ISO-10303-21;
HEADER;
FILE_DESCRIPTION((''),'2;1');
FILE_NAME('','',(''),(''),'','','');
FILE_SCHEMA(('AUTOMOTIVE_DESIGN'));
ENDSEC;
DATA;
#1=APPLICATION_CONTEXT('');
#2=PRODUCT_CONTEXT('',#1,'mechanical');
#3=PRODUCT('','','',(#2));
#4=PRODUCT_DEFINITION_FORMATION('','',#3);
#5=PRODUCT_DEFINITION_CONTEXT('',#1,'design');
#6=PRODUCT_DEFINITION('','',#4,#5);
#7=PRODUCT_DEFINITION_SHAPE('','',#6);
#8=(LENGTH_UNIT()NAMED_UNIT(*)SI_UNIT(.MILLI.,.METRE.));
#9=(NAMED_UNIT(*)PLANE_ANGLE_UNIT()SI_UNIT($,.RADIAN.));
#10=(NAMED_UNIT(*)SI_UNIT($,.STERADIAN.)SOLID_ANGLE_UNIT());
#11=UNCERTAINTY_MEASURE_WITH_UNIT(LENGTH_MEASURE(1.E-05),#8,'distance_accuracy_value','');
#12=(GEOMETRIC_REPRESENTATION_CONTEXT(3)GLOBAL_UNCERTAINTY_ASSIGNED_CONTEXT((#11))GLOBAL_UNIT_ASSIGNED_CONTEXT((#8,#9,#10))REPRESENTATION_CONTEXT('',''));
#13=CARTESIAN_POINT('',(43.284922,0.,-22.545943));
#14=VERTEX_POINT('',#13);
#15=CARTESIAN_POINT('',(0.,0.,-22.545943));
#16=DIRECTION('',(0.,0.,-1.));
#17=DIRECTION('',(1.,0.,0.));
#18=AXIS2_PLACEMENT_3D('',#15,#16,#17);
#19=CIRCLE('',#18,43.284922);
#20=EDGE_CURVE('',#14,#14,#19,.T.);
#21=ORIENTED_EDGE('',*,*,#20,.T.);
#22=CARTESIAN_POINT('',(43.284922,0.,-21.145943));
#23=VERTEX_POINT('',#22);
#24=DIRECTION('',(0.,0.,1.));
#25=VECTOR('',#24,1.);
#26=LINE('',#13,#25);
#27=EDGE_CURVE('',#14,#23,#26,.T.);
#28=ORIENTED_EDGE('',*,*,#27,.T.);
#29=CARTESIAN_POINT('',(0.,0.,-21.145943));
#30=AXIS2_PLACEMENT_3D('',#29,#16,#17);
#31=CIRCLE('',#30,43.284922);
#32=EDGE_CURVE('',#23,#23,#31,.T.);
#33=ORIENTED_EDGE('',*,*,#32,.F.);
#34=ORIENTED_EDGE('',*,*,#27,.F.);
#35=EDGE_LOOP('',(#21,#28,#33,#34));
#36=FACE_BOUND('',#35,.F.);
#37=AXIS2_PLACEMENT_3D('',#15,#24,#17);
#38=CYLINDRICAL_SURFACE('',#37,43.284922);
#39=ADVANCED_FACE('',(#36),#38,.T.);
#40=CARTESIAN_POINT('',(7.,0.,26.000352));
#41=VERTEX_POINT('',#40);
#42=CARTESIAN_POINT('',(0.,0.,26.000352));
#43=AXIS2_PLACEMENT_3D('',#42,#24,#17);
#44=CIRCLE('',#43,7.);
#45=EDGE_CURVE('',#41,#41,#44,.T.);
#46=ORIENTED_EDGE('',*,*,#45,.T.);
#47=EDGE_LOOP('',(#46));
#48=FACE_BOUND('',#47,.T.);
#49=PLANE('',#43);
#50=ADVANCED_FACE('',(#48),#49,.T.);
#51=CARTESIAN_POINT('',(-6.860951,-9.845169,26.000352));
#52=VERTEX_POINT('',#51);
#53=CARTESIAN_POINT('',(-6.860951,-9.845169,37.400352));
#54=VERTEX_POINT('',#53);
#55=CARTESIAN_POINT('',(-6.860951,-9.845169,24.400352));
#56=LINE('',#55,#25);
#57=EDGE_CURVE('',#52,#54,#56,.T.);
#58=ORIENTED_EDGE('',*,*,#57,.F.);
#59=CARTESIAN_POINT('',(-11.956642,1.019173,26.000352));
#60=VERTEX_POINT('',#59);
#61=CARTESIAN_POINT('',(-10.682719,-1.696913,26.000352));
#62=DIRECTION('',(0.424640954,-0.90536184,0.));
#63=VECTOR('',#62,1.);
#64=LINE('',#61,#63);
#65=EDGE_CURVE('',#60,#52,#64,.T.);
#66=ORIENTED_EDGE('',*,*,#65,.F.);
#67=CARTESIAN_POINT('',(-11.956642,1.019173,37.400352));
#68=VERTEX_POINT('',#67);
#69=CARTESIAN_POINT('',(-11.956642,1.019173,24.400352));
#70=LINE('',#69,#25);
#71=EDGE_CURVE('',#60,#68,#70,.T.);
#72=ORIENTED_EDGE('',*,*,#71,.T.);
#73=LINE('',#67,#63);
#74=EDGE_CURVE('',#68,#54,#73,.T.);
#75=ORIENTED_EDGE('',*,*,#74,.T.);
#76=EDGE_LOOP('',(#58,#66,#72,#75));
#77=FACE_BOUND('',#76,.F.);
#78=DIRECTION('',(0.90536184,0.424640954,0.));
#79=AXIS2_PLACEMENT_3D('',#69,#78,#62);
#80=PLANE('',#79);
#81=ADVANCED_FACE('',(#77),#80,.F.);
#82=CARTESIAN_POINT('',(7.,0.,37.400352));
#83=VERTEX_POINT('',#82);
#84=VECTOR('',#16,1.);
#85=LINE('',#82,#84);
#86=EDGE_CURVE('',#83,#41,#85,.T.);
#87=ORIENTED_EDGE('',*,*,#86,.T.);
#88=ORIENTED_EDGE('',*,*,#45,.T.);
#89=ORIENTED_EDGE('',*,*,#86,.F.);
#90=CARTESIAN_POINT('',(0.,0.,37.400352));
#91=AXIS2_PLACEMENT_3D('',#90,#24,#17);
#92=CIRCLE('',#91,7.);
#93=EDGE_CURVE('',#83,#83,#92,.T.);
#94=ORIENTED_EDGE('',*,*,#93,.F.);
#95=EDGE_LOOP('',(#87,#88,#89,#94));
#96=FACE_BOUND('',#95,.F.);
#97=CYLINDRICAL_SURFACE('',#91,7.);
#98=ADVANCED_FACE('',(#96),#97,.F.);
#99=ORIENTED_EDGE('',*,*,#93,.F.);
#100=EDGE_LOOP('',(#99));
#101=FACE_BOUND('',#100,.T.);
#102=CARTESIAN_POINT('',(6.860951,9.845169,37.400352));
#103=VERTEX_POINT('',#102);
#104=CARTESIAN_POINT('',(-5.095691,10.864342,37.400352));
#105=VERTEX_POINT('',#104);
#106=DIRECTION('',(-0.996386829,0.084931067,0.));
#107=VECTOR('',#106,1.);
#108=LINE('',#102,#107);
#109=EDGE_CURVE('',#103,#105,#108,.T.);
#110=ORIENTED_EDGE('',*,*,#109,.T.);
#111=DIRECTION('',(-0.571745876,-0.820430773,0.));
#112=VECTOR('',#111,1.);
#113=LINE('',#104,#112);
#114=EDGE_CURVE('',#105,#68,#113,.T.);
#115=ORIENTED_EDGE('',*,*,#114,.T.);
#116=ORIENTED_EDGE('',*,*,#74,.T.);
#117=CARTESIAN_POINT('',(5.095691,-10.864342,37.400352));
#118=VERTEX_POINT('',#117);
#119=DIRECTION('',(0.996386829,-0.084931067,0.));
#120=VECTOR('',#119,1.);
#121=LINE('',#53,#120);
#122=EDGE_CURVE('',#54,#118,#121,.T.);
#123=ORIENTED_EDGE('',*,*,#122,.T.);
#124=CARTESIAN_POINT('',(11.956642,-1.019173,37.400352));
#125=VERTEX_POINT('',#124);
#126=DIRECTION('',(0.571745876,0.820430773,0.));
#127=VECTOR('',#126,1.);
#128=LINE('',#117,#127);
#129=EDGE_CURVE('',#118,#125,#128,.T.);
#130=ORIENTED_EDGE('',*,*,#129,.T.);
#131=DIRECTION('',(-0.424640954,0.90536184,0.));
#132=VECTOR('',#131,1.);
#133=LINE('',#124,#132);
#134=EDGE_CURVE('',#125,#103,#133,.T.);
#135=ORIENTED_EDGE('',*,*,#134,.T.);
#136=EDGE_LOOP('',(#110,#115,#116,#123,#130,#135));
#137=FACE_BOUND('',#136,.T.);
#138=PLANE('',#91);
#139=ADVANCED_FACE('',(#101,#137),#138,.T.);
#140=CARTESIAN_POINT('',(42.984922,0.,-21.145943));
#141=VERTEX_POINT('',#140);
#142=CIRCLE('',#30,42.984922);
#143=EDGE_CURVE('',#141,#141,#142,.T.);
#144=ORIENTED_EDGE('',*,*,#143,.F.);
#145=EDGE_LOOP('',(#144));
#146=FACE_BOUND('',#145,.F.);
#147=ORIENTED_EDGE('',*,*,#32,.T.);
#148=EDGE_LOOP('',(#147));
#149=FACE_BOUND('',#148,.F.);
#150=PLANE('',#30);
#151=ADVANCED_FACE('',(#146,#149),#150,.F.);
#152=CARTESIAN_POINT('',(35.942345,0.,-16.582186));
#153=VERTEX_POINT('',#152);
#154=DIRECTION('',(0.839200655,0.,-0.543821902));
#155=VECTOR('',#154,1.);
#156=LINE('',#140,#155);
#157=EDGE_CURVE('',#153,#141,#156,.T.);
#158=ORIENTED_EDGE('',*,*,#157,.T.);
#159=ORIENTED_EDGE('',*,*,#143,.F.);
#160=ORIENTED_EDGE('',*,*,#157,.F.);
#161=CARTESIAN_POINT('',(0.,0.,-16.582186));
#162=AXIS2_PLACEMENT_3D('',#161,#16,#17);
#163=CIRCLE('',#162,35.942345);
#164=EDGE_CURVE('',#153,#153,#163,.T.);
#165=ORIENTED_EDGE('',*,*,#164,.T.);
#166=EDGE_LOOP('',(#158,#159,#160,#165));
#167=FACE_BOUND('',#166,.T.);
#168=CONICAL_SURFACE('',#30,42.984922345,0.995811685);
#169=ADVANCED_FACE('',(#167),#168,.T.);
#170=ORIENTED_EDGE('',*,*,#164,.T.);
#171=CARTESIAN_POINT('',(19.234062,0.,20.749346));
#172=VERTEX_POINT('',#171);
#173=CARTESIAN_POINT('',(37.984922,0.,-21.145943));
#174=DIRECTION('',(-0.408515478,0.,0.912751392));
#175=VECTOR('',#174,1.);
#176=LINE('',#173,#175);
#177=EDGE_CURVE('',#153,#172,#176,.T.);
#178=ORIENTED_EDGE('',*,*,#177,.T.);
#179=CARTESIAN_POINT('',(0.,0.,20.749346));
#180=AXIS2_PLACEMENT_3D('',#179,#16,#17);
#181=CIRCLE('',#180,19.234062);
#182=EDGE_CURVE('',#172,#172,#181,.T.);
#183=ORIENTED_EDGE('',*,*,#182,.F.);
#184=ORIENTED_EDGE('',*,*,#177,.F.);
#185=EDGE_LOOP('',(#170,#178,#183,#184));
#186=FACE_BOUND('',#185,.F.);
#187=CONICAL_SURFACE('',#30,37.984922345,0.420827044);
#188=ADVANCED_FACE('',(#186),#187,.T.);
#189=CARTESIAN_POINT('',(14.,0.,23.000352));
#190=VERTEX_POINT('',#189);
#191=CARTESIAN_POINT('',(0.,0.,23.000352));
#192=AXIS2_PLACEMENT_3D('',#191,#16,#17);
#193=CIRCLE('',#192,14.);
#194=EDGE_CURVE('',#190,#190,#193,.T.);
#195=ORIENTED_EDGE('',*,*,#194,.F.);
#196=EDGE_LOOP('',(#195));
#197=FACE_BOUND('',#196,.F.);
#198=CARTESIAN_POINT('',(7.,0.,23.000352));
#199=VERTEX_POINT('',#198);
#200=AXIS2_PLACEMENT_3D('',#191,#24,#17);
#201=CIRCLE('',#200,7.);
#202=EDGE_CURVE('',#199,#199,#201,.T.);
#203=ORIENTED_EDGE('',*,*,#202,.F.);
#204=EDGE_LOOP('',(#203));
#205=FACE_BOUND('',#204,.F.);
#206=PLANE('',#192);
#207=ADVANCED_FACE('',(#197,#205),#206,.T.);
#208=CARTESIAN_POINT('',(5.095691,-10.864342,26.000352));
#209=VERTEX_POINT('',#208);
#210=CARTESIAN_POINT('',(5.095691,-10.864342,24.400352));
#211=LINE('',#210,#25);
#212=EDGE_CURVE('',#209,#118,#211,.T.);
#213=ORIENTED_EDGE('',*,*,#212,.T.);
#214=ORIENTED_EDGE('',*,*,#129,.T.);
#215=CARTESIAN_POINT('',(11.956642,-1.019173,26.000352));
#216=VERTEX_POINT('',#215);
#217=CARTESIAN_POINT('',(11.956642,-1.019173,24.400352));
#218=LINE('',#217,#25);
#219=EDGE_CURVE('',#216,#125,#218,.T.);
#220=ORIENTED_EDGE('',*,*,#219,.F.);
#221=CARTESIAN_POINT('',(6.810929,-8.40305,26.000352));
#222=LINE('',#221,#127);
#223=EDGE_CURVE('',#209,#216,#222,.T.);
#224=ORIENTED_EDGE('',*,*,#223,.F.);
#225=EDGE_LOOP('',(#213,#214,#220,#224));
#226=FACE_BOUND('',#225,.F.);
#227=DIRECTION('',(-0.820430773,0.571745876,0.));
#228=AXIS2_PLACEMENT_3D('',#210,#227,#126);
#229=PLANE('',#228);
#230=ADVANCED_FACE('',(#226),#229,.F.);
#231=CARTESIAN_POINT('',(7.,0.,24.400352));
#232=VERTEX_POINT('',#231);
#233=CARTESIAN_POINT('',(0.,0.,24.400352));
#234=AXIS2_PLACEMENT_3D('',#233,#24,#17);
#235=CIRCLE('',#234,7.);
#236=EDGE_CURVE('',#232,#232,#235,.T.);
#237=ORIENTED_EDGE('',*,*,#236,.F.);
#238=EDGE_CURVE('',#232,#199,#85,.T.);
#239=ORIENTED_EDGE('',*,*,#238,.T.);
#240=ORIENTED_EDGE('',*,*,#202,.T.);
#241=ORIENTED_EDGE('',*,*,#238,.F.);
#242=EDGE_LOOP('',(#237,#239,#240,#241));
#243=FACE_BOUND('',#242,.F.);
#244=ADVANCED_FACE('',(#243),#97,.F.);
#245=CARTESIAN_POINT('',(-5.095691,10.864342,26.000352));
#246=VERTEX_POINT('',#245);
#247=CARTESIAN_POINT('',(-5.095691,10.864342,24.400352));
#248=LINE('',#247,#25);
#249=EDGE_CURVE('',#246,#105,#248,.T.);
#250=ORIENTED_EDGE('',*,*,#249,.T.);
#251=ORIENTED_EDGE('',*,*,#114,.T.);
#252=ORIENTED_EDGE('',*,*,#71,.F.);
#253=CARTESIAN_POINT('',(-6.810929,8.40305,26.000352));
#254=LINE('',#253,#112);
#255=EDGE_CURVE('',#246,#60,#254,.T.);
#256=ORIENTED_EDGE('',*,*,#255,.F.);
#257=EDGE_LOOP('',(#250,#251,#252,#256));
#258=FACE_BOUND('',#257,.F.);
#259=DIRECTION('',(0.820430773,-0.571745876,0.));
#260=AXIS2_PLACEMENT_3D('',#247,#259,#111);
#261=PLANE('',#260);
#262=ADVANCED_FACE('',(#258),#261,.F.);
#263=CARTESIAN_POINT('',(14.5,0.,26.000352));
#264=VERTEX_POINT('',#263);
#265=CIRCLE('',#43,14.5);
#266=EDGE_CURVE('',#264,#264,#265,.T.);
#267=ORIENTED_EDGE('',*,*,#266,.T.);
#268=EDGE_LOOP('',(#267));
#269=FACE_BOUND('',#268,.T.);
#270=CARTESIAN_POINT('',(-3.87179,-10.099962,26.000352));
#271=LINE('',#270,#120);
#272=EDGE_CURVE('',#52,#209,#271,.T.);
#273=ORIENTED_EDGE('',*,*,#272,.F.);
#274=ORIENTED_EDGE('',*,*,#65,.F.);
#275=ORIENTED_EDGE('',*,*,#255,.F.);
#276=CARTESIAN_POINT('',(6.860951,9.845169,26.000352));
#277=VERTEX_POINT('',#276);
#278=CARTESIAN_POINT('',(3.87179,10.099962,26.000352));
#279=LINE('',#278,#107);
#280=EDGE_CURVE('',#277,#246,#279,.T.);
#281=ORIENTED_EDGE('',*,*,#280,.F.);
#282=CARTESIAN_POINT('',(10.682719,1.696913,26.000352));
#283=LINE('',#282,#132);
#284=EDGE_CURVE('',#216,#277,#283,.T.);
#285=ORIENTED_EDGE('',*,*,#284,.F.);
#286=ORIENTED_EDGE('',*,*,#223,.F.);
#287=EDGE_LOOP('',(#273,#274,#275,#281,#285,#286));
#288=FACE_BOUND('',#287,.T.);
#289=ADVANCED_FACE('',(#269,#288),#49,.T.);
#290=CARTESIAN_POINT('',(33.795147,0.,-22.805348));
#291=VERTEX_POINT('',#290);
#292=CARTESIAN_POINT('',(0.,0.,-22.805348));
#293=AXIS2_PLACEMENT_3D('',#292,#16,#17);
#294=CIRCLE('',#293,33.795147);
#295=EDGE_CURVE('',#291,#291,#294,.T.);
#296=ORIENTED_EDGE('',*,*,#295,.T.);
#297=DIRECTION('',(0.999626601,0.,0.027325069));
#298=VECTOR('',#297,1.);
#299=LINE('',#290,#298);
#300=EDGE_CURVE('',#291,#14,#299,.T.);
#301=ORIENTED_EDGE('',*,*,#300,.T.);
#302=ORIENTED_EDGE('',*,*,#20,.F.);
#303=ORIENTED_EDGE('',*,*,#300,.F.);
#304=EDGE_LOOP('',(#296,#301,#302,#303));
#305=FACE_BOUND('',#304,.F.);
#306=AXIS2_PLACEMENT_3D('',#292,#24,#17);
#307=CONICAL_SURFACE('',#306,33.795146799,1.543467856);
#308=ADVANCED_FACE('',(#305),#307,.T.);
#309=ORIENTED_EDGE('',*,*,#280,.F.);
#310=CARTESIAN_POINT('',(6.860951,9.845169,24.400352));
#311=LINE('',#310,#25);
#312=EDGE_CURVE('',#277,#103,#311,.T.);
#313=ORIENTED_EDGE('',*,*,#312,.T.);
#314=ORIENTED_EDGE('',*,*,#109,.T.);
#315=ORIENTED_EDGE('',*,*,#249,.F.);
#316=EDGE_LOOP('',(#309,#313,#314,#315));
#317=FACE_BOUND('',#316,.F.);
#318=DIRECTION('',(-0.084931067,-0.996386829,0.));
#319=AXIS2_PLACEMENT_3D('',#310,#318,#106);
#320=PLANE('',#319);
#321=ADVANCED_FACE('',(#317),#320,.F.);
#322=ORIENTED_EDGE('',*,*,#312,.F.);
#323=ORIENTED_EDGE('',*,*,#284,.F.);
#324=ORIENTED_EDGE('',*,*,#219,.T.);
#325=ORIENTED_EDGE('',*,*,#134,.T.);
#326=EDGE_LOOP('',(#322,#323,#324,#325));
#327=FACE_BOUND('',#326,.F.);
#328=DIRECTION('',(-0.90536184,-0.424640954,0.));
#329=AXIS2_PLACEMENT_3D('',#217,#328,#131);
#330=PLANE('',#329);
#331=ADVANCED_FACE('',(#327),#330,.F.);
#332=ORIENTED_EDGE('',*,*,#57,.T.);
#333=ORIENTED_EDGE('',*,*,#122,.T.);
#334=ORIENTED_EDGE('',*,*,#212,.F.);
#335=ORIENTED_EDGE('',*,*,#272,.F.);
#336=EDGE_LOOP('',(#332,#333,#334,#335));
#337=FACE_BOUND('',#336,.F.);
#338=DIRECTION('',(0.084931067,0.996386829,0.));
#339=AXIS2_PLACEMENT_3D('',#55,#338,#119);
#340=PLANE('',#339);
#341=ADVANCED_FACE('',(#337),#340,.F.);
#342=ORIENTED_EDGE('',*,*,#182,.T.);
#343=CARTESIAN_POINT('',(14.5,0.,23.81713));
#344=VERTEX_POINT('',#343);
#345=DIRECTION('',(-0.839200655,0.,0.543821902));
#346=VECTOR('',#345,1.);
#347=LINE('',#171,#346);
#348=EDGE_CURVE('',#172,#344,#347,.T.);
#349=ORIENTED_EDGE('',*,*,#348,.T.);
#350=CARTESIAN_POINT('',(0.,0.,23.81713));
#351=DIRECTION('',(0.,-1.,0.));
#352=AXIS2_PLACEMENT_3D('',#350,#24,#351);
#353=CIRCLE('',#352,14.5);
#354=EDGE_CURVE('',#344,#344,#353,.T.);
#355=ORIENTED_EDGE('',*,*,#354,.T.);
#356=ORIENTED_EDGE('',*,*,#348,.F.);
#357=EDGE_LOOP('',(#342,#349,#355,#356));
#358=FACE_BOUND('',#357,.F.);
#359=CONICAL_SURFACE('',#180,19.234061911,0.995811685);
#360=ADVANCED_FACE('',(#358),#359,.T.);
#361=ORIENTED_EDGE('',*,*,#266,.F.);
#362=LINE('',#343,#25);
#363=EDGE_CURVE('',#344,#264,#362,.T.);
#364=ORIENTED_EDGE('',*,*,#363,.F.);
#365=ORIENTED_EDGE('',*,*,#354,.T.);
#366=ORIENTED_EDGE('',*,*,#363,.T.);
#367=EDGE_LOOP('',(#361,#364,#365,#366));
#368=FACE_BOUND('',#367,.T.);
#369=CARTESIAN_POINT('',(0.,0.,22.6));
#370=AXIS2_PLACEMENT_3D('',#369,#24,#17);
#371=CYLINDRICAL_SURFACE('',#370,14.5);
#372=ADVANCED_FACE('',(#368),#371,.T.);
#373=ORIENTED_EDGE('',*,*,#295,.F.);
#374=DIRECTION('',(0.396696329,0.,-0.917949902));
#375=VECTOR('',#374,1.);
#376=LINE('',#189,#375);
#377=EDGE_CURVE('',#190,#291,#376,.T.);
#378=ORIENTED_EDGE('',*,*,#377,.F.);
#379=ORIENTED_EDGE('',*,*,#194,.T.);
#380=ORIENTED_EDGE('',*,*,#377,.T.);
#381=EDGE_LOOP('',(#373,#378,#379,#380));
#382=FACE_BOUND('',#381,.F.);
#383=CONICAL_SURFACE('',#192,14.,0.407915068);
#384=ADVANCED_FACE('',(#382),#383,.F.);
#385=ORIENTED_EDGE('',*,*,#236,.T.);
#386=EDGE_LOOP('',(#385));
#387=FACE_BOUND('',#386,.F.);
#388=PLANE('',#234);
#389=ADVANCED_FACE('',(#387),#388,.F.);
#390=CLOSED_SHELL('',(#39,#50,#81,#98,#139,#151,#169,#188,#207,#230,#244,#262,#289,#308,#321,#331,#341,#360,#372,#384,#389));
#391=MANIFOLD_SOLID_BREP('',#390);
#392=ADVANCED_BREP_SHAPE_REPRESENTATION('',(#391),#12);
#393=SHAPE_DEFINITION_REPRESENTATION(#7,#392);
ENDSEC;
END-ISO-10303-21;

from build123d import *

# Parameters (mm, degrees)
F4_DEPTH    = 13
F5_R        = 7
F6_DEPTH    = 15
F7_R        = 14.5
F8_DEPTH    = 1.6
F9_S5_R     = 14.5
F9_T6_DEPTH = 29
F10_SIZE    = 5


# Not quite as in the source:
# - a fillet or chamfer that OpenCascade refuses, or shapes differently, is made with other operations: its cross-section is extruded or revolved along the edge and cut away or added
# - a feature names something its author has since deleted; it is built from what else it names


with BuildPart() as f2:
    # F0 (on Front) → F2 (revolve)
    with BuildSketch(Plane.XZ):
        Polygon((17.6, 24.4003517207), (0, 24.4003517207), (0, 23.0003517207), (14, 23.0003517207), (33.795146799, -22.8053483963), (43.2849223453, -22.5459427606), (43.2849223453, -21.1459427606), (37.9849223453, -21.1459427606), align=None)
    revolve(axis=Axis((0, 0, 12.0206931606), (0, 0, -1)))

    # F3 (on face) → F4 (join)
    with BuildSketch(Plane.XY.offset(24.4003517207)):
        Polygon((-11.9566419536, 1.0191727989), (-6.8609505115, -9.8451692763), (5.0956914421, -10.8643420752), (11.9566419536, -1.0191727989), (6.8609505115, 9.8451692763), (-5.0956914421, 10.8643420752), align=None)
    extrude(amount=F4_DEPTH)

    # F5 (on face) → F6 (cut)
    with BuildSketch(Plane.XY.offset(37.4003517207)):
        Circle(F5_R)
    extrude(amount=-F6_DEPTH, mode=Mode.SUBTRACT)

    # F7 (on face) → F8 (join)
    with BuildSketch(Plane.XY.offset(24.4003517207)):
        Circle(F7_R)
    extrude(amount=F8_DEPTH)

    # F9: chamfer of 4 on 1 edges, made by hand


with BuildPart() as f9_tool2:
    # F9_s3 → F9_t4 (revolve)
    with BuildSketch(Plane.XZ):
        Polygon((19.2340619114, 20.749346151), (13.6, 24.4003517207), (17.6, 24.4003517207), align=None)
    revolve(axis=Axis((0, 0, 24.4003517207), (0, 0, -1)))

    # F9_s5 → F9_t6 (cut, symmetric)
    with BuildSketch(Plane.XY.offset(22.6)):
        Circle(F9_S5_R)
    extrude(amount=F9_T6_DEPTH, both=True, mode=Mode.SUBTRACT)


with BuildPart() as f2_1:
    add(f2.part)

    # F9_t1: cut F9_tool2
    add(f9_tool2.part, mode=Mode.SUBTRACT)

    # F10
    f10_edges = [f2_1.edges().sort_by_distance(p)[0] for p in [
        (-37.984922, 0, -21.145943),
    ]]
    chamfer(f10_edges, length=F10_SIZE)


solid = f2_1.part
